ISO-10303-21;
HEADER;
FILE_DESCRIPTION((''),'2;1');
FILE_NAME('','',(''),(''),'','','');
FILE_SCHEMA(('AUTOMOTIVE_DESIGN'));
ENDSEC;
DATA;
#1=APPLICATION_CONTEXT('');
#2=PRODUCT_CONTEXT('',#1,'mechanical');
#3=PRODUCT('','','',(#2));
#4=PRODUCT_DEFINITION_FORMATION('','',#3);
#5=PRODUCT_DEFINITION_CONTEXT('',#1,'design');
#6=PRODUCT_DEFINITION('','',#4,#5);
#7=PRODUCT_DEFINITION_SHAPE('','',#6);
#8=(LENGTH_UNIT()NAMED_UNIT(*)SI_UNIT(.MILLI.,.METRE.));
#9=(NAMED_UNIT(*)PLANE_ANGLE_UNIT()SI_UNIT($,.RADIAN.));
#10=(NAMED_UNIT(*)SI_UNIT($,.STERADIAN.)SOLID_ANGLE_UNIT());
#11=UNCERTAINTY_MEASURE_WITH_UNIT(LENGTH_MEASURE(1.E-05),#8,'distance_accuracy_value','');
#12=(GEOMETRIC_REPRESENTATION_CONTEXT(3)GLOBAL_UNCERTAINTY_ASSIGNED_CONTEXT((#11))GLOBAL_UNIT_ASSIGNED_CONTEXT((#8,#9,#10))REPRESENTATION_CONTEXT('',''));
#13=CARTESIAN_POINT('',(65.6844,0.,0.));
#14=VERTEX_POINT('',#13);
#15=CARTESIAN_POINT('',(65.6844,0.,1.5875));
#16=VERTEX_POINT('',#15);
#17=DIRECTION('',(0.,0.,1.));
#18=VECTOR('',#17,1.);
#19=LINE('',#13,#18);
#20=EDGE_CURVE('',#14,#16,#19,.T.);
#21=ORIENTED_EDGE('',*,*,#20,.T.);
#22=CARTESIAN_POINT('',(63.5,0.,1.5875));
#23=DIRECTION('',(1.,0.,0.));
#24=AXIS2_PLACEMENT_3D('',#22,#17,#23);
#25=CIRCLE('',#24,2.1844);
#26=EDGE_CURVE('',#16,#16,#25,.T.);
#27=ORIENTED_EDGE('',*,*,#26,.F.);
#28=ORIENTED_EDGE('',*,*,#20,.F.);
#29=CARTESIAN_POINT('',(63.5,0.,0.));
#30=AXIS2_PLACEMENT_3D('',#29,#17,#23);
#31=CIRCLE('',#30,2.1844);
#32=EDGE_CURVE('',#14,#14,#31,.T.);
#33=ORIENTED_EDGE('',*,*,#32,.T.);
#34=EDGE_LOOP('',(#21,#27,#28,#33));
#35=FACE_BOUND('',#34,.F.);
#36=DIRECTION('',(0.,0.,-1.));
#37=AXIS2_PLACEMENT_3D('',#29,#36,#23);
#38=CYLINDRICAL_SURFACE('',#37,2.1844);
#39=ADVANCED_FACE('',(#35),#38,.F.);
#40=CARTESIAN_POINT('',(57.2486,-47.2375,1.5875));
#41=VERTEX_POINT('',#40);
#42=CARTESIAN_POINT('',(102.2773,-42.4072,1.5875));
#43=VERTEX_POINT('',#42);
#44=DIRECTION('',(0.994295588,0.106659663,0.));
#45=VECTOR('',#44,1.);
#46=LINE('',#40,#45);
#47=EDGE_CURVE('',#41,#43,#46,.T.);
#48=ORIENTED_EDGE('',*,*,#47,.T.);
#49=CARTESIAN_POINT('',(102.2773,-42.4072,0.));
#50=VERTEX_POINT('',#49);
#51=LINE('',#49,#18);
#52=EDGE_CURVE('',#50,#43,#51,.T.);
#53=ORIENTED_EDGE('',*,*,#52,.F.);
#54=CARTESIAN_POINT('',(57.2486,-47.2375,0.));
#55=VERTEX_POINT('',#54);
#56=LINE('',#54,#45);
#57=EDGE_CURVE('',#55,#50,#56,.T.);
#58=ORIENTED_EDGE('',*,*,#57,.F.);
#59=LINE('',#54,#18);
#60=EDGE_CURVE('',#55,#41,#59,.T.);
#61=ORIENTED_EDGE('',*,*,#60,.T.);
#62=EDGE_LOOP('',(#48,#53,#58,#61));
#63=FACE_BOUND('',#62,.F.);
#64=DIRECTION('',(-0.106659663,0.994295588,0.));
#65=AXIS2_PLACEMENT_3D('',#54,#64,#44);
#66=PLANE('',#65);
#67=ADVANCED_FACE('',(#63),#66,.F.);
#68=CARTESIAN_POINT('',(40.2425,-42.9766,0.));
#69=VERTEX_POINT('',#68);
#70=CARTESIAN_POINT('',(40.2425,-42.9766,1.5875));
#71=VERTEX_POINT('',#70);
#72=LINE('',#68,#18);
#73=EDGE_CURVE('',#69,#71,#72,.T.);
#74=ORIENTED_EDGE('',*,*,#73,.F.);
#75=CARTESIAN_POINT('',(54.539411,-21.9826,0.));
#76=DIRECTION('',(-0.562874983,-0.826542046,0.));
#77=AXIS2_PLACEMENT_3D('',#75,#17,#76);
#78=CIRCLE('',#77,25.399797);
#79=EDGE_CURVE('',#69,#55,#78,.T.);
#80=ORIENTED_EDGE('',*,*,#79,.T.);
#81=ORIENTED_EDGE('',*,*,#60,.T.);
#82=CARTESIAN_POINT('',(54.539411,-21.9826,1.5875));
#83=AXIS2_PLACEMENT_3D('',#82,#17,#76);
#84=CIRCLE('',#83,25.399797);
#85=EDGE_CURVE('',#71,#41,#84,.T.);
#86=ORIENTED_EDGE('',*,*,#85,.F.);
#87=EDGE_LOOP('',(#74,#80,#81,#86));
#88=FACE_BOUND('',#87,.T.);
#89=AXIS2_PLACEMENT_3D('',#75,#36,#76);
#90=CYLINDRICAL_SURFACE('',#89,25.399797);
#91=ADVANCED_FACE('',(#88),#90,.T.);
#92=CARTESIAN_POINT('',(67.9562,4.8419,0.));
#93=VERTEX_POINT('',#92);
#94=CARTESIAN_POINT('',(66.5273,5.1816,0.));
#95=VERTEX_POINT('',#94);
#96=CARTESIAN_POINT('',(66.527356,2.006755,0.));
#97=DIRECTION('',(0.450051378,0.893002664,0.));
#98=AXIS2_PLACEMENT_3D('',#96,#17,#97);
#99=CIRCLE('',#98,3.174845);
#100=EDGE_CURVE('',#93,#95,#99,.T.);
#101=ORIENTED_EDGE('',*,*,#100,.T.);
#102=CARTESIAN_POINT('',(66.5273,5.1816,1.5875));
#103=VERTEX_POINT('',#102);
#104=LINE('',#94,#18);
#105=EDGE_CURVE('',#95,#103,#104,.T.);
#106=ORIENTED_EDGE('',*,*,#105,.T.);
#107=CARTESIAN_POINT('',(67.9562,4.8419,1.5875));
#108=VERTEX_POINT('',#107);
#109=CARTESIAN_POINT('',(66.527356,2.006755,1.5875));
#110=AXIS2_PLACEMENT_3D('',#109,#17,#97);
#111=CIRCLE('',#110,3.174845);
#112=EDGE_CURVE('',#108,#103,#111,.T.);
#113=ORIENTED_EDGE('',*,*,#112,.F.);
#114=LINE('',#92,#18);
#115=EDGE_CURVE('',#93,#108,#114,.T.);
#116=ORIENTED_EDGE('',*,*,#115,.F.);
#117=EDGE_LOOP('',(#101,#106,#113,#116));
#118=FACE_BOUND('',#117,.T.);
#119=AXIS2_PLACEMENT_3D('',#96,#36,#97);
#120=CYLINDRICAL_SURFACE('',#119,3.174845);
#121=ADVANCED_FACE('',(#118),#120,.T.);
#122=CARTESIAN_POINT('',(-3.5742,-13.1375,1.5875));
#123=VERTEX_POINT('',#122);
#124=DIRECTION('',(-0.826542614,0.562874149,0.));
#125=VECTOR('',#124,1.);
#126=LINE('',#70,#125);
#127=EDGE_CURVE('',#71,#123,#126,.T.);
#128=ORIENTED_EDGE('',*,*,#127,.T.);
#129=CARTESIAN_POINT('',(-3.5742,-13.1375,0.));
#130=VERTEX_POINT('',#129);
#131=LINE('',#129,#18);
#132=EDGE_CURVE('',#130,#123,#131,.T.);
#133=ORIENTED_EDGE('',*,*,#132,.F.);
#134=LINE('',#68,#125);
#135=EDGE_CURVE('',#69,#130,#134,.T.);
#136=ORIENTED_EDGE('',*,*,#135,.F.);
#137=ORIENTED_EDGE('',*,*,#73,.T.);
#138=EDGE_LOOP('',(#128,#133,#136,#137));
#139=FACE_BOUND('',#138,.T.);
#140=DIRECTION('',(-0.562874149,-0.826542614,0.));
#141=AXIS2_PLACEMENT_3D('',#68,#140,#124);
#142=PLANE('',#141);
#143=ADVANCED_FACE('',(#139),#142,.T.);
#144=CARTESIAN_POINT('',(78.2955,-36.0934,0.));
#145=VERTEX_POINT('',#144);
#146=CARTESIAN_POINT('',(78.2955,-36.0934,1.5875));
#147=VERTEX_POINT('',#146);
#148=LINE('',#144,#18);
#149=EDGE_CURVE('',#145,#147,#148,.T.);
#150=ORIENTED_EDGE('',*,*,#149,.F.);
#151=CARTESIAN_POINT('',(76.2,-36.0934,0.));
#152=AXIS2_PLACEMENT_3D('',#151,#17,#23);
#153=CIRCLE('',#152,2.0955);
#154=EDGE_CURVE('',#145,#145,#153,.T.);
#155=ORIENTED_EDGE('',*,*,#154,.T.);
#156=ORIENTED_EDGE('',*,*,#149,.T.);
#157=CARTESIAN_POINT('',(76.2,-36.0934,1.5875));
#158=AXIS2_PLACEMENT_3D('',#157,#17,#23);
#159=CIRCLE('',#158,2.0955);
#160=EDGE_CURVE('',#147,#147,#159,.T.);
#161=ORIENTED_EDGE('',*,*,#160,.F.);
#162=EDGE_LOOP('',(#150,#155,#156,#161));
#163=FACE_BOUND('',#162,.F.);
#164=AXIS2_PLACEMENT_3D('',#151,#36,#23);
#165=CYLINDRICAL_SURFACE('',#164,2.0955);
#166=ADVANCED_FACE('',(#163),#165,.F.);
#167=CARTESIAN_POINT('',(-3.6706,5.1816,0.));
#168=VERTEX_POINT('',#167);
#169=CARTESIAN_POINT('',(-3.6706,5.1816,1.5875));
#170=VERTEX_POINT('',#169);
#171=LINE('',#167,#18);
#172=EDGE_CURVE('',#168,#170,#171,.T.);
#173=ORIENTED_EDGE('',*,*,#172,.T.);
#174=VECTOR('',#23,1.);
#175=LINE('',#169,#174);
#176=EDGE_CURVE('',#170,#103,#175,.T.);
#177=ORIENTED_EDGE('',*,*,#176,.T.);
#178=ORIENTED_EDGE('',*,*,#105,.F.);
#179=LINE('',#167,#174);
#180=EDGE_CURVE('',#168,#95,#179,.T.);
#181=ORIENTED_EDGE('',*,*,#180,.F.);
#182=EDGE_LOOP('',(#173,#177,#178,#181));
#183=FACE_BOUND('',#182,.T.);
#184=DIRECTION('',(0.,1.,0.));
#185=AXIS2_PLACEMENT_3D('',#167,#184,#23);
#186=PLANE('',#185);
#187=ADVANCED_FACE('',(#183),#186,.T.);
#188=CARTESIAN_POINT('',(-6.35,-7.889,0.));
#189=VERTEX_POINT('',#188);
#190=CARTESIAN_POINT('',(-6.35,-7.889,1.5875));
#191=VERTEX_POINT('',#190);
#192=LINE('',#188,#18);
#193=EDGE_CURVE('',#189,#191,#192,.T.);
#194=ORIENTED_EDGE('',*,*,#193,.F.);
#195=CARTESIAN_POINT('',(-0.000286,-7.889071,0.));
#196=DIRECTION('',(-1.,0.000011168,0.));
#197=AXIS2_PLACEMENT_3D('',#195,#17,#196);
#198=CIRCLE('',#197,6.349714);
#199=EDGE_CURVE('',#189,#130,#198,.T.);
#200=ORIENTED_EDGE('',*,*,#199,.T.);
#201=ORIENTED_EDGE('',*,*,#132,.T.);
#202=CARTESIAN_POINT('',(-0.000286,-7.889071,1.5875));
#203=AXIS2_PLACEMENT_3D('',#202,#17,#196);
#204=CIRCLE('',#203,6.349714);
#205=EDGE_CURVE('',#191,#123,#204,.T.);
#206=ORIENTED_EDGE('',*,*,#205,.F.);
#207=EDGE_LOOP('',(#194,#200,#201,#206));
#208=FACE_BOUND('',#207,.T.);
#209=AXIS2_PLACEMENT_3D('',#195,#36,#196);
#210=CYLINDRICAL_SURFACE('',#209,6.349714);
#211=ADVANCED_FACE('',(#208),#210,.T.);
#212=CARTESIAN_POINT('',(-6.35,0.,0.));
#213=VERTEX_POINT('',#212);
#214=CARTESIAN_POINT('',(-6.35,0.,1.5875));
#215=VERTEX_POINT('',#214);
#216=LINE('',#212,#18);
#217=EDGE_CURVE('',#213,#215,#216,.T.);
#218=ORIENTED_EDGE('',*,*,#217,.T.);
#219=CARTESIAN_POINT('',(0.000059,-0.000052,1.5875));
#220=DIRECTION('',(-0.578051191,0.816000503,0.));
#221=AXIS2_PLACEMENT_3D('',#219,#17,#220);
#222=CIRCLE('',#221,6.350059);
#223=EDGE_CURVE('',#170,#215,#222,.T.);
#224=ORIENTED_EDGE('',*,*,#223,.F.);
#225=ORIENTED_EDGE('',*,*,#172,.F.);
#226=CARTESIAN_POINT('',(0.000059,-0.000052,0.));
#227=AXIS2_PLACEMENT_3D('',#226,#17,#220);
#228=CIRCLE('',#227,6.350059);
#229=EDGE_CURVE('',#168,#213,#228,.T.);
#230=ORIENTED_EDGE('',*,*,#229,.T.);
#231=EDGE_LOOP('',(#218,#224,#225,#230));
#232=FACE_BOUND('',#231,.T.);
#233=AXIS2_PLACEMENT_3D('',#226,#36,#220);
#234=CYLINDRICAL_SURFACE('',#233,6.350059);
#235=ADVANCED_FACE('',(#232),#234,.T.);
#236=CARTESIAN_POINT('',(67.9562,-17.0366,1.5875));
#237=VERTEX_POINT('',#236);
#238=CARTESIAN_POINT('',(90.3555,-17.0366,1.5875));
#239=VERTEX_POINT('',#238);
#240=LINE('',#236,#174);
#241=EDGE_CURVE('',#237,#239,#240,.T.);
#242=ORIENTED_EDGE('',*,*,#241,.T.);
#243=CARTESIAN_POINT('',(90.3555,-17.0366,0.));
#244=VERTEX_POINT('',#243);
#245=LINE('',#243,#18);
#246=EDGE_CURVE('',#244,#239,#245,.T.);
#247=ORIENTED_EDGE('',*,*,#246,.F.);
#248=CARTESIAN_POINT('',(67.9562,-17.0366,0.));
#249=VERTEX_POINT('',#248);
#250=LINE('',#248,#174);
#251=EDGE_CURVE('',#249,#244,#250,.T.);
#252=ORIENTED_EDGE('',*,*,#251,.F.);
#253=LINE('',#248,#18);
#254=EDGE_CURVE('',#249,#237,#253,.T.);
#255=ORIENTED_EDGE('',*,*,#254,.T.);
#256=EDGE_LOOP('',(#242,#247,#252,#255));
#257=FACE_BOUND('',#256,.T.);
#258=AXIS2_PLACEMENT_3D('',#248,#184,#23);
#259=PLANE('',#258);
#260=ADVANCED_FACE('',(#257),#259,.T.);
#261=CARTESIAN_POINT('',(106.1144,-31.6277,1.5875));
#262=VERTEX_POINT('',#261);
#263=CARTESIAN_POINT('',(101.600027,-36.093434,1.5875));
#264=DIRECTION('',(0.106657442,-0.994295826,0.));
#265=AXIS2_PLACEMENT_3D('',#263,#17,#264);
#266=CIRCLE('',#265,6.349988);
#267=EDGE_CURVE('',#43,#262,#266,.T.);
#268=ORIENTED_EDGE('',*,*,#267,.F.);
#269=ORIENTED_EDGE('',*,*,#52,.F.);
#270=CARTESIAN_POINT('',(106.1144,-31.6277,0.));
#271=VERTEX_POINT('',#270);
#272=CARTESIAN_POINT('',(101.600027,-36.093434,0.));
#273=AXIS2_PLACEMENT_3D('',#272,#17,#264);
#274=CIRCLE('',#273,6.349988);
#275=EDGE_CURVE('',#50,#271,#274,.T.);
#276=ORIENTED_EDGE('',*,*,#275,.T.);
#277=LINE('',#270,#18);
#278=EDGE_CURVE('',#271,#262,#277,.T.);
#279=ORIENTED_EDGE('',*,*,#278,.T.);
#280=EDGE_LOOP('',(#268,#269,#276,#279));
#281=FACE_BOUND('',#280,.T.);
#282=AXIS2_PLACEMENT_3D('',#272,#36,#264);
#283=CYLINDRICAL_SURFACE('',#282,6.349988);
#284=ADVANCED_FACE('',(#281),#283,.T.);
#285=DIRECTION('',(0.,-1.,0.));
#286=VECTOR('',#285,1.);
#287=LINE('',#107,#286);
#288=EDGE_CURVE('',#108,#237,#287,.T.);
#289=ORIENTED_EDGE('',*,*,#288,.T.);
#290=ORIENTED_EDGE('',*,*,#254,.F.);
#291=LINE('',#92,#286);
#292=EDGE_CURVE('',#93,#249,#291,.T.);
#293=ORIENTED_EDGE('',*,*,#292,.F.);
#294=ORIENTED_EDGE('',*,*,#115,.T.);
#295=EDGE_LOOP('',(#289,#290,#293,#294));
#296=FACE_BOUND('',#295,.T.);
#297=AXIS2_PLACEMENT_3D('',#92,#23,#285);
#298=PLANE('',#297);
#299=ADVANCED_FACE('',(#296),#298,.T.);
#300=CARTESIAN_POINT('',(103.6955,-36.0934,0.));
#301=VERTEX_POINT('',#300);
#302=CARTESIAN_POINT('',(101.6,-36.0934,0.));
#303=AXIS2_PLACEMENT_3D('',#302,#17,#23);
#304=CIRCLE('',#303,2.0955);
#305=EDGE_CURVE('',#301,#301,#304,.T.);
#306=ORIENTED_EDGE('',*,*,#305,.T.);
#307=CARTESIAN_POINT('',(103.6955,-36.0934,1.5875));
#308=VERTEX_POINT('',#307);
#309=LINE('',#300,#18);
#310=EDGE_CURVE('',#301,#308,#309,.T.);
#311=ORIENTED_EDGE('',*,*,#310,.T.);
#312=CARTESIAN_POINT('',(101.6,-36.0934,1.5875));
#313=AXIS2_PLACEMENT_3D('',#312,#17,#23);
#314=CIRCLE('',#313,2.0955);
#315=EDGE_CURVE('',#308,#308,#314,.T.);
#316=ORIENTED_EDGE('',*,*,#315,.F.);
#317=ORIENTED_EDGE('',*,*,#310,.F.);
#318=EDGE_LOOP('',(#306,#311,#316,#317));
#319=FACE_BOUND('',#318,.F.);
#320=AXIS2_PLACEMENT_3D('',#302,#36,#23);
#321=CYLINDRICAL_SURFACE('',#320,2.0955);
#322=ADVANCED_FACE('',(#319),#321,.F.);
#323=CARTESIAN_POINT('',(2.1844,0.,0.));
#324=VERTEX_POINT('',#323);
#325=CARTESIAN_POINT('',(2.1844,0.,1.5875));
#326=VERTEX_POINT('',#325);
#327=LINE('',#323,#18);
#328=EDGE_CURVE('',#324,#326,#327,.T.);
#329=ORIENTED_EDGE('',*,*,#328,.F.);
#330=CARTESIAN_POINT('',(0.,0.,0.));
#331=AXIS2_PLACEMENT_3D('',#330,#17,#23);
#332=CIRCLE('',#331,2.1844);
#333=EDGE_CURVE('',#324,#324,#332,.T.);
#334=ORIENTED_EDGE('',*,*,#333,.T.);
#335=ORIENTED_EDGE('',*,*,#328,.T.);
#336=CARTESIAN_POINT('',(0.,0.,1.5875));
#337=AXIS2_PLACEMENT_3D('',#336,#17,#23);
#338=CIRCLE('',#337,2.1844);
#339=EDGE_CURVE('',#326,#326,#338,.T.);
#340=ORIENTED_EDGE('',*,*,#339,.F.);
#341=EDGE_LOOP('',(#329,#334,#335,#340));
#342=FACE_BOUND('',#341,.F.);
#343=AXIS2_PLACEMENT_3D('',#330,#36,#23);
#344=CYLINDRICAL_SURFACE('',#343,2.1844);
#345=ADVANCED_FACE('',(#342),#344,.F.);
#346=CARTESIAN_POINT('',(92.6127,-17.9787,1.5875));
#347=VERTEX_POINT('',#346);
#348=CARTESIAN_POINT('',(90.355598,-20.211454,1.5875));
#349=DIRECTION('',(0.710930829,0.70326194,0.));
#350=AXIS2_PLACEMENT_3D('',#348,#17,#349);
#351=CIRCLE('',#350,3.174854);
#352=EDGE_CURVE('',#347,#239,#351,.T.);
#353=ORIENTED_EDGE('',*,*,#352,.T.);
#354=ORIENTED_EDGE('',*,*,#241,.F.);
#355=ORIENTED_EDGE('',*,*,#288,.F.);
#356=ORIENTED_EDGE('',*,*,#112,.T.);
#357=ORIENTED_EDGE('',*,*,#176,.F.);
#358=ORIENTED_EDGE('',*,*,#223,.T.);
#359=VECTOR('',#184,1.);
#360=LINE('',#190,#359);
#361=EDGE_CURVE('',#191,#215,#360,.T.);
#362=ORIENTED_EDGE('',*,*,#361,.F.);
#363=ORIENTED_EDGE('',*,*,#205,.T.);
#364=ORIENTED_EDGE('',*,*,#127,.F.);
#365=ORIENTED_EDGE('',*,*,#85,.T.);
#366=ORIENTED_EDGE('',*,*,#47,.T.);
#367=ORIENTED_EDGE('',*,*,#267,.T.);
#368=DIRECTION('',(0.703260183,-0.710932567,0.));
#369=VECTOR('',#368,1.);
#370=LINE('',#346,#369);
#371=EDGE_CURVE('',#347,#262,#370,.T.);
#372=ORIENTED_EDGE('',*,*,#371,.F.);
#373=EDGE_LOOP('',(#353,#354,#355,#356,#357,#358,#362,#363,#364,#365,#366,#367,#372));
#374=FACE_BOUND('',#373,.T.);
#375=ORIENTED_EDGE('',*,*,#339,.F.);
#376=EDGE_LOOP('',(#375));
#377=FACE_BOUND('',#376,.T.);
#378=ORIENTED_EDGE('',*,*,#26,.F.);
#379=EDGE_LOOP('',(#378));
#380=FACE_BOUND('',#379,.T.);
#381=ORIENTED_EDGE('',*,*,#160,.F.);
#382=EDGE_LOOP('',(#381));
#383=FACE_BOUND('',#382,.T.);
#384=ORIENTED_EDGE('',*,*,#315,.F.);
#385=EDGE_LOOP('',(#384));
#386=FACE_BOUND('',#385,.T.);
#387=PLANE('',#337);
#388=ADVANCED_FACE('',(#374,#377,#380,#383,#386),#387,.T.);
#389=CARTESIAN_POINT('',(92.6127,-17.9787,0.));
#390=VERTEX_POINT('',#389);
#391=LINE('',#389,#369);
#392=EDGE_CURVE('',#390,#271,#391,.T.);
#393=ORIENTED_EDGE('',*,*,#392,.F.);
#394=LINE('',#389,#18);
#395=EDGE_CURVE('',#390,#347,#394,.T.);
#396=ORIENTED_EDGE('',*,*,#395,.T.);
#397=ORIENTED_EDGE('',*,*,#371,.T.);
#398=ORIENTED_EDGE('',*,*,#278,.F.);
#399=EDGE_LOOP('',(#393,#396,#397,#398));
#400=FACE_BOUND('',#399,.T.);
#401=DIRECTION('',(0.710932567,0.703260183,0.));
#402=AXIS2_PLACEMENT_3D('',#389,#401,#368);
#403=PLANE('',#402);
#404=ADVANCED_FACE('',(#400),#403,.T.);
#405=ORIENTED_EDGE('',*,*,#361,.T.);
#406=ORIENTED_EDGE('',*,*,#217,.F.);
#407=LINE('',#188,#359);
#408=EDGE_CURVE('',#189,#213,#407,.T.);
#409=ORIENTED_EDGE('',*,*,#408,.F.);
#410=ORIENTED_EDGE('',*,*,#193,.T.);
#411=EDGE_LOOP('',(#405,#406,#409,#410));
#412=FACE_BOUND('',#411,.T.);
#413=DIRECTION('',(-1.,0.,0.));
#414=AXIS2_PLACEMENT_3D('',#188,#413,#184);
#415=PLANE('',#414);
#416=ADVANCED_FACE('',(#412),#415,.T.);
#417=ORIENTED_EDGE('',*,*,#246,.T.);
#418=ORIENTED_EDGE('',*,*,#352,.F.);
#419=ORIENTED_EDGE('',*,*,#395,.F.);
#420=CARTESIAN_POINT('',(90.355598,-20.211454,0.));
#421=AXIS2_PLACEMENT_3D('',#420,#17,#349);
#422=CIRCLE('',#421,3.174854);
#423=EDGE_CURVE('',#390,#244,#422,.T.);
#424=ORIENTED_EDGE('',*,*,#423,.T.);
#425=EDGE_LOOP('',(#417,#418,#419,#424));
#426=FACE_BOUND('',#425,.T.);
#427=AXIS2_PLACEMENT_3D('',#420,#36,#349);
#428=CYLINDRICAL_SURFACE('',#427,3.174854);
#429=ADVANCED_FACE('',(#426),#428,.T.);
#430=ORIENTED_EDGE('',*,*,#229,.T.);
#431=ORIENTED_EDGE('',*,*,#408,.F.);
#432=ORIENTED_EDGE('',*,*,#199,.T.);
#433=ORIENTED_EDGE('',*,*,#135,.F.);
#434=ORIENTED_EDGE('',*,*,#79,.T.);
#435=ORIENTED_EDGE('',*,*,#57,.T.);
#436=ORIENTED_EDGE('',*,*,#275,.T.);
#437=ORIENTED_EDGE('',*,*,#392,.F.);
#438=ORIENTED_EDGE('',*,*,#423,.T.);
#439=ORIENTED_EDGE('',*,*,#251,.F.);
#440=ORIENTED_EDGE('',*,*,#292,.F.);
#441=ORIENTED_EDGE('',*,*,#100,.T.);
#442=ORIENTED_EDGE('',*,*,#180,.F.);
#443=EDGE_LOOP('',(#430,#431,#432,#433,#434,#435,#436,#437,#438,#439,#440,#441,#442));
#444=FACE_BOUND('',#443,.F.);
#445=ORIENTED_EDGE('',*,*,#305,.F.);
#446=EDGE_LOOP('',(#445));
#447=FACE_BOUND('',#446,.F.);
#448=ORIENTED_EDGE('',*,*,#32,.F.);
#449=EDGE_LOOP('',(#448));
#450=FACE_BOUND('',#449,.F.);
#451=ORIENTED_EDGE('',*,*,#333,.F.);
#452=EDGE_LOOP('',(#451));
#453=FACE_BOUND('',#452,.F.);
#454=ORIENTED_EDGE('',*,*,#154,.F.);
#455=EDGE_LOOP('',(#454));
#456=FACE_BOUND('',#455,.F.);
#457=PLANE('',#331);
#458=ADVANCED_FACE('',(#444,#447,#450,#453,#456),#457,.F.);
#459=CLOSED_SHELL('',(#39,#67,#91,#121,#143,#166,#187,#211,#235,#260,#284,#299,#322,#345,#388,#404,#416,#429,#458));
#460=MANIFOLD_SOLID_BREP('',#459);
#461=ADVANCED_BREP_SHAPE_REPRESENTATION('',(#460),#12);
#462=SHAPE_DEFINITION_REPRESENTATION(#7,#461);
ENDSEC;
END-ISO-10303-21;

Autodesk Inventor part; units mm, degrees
ref_plane "YZ Plane" through (0, 0, 0) normal (1, 0, 0) x (0, 1, 0)
ref_plane "XZ Plane" through (0, 0, 0) normal (0, 1, 0) x (-1, 0, 0)
ref_plane "XY Plane" through (0, 0, 0) normal (0, 0, 1) x (1, 0, 0)
sketch "main" plane through (0, 0, 0) normal (0, 0, 1) x (1, 0, 0)
  arc A0 (7.9061, 59.9189) -> (2.6576, 57.1432) centre (7.9061, 53.5689) ccw
  line L0 (7.9061, 59.9189) -> (15.7951, 59.9189)
  arc A1 (20.9767, 57.2396) -> (15.7951, 59.9189) centre (15.7951, 53.5689) ccw
  circle A2 centre (15.7951, 53.5689) radius 2.1844
  arc A3 (-27.1814, 13.3264) -> (-31.4423, -3.6797) centre (-6.1872, -0.9705) ccw
  circle A4 centre (15.7951, -9.9311) radius 2.1844
  line L1 (20.9767, 57.2396) -> (20.9767, -12.9584)
  circle A5 centre (-20.2983, -22.6311) radius 2.0955
  line L2 (-2.1836, -39.0438) -> (-15.8326, -52.5455)
  circle A6 centre (-20.2983, -48.0311) radius 2.0955
  line L3 (-31.4423, -3.6797) -> (-26.6121, -48.7084)
  arc A7 (-26.6121, -48.7084) -> (-15.8326, -52.5455) centre (-20.2983, -48.0311) ccw
  line L4 (-27.1814, 13.3264) -> (2.6576, 57.1432)
  line L5 (-1.2414, -14.3873) -> (-1.2414, -36.7866)
  arc A8 (20.637, -14.3873) -> (20.9767, -12.9584) centre (17.8017, -12.9584) ccw
  arc A9 (-2.1836, -39.0438) -> (-1.2414, -36.7866) centre (-4.4164, -36.7866) ccw
  line L6 (20.637, -14.3873) -> (-1.2414, -14.3873)
  point P0 (-2.1335, 12.2772)
  point P1 (20.9767, -16.1334)
  dimension "d0" = 12.7
  dimension "d1" = 6.35
  dimension "d2" = 25.4
  dimension "d3" = 4.191
  dimension "d4" = 4.191
  dimension "d5" = 4.3688
  dimension "d8" = 3.175
sketch "Sketch1" plane through (0, 0, 0) normal (0, 0, 1) x (1, 0, 0)
  arc A0 (-6.35, -7.889) -> (-3.5742, -13.1375) centre (0, -7.889) ccw
  line L0 (-6.35, -7.889) -> (-6.35, 0)
  arc A1 (-3.6706, 5.1816) -> (-6.35, 0) centre (0, 0) ccw
  circle A2 centre (0, 0) radius 2.1844
  arc A3 (40.2425, -42.9766) -> (57.2486, -47.2375) centre (54.5395, -21.9824) ccw
  circle A4 centre (63.5, 0) radius 2.1844
  line L1 (-3.6706, 5.1816) -> (66.5273, 5.1816)
  circle A5 centre (76.2, -36.0934) radius 2.0955
  line L2 (92.6127, -17.9787) -> (106.1144, -31.6277)
  circle A6 centre (101.6, -36.0934) radius 2.0955
  line L3 (57.2486, -47.2375) -> (102.2773, -42.4072)
  arc A7 (102.2773, -42.4072) -> (106.1144, -31.6277) centre (101.6, -36.0934) ccw
  line L4 (40.2425, -42.9766) -> (-3.5742, -13.1375)
  line L5 (67.9562, -17.0366) -> (90.3555, -17.0366)
  arc A8 (67.9562, 4.8419) -> (66.5273, 5.1816) centre (66.5273, 2.0066) ccw
  arc A9 (92.6127, -17.9787) -> (90.3555, -17.0366) centre (90.3555, -20.2116) ccw
  line L6 (67.9562, 4.8419) -> (67.9562, -17.0366)
  point P0 (0, 0)
extrude "Extrusion1" add sketch "Sketch1" along normal blind 1.5875
equation "\"BendRadius\" = Thickness"
equation "\"BendReliefWidth\" = Thickness"
equation "\"BendReliefDepth\" = 0.5 * Thickness"
equation "\"CornerReliefSize\" = 4 * Thickness"
equation "\"MinimumRemnant\" = 2 * Thickness"
equation "\"TransitionRadius\" = BendRadius"
equation "\"JacobiRadiusSize\" = BendRadius"
equation "\"GapSize\" = Thickness"
equation "\"Thickness\" = 1.5875"
properties part number "sled" material "Acetal Resin, White"
